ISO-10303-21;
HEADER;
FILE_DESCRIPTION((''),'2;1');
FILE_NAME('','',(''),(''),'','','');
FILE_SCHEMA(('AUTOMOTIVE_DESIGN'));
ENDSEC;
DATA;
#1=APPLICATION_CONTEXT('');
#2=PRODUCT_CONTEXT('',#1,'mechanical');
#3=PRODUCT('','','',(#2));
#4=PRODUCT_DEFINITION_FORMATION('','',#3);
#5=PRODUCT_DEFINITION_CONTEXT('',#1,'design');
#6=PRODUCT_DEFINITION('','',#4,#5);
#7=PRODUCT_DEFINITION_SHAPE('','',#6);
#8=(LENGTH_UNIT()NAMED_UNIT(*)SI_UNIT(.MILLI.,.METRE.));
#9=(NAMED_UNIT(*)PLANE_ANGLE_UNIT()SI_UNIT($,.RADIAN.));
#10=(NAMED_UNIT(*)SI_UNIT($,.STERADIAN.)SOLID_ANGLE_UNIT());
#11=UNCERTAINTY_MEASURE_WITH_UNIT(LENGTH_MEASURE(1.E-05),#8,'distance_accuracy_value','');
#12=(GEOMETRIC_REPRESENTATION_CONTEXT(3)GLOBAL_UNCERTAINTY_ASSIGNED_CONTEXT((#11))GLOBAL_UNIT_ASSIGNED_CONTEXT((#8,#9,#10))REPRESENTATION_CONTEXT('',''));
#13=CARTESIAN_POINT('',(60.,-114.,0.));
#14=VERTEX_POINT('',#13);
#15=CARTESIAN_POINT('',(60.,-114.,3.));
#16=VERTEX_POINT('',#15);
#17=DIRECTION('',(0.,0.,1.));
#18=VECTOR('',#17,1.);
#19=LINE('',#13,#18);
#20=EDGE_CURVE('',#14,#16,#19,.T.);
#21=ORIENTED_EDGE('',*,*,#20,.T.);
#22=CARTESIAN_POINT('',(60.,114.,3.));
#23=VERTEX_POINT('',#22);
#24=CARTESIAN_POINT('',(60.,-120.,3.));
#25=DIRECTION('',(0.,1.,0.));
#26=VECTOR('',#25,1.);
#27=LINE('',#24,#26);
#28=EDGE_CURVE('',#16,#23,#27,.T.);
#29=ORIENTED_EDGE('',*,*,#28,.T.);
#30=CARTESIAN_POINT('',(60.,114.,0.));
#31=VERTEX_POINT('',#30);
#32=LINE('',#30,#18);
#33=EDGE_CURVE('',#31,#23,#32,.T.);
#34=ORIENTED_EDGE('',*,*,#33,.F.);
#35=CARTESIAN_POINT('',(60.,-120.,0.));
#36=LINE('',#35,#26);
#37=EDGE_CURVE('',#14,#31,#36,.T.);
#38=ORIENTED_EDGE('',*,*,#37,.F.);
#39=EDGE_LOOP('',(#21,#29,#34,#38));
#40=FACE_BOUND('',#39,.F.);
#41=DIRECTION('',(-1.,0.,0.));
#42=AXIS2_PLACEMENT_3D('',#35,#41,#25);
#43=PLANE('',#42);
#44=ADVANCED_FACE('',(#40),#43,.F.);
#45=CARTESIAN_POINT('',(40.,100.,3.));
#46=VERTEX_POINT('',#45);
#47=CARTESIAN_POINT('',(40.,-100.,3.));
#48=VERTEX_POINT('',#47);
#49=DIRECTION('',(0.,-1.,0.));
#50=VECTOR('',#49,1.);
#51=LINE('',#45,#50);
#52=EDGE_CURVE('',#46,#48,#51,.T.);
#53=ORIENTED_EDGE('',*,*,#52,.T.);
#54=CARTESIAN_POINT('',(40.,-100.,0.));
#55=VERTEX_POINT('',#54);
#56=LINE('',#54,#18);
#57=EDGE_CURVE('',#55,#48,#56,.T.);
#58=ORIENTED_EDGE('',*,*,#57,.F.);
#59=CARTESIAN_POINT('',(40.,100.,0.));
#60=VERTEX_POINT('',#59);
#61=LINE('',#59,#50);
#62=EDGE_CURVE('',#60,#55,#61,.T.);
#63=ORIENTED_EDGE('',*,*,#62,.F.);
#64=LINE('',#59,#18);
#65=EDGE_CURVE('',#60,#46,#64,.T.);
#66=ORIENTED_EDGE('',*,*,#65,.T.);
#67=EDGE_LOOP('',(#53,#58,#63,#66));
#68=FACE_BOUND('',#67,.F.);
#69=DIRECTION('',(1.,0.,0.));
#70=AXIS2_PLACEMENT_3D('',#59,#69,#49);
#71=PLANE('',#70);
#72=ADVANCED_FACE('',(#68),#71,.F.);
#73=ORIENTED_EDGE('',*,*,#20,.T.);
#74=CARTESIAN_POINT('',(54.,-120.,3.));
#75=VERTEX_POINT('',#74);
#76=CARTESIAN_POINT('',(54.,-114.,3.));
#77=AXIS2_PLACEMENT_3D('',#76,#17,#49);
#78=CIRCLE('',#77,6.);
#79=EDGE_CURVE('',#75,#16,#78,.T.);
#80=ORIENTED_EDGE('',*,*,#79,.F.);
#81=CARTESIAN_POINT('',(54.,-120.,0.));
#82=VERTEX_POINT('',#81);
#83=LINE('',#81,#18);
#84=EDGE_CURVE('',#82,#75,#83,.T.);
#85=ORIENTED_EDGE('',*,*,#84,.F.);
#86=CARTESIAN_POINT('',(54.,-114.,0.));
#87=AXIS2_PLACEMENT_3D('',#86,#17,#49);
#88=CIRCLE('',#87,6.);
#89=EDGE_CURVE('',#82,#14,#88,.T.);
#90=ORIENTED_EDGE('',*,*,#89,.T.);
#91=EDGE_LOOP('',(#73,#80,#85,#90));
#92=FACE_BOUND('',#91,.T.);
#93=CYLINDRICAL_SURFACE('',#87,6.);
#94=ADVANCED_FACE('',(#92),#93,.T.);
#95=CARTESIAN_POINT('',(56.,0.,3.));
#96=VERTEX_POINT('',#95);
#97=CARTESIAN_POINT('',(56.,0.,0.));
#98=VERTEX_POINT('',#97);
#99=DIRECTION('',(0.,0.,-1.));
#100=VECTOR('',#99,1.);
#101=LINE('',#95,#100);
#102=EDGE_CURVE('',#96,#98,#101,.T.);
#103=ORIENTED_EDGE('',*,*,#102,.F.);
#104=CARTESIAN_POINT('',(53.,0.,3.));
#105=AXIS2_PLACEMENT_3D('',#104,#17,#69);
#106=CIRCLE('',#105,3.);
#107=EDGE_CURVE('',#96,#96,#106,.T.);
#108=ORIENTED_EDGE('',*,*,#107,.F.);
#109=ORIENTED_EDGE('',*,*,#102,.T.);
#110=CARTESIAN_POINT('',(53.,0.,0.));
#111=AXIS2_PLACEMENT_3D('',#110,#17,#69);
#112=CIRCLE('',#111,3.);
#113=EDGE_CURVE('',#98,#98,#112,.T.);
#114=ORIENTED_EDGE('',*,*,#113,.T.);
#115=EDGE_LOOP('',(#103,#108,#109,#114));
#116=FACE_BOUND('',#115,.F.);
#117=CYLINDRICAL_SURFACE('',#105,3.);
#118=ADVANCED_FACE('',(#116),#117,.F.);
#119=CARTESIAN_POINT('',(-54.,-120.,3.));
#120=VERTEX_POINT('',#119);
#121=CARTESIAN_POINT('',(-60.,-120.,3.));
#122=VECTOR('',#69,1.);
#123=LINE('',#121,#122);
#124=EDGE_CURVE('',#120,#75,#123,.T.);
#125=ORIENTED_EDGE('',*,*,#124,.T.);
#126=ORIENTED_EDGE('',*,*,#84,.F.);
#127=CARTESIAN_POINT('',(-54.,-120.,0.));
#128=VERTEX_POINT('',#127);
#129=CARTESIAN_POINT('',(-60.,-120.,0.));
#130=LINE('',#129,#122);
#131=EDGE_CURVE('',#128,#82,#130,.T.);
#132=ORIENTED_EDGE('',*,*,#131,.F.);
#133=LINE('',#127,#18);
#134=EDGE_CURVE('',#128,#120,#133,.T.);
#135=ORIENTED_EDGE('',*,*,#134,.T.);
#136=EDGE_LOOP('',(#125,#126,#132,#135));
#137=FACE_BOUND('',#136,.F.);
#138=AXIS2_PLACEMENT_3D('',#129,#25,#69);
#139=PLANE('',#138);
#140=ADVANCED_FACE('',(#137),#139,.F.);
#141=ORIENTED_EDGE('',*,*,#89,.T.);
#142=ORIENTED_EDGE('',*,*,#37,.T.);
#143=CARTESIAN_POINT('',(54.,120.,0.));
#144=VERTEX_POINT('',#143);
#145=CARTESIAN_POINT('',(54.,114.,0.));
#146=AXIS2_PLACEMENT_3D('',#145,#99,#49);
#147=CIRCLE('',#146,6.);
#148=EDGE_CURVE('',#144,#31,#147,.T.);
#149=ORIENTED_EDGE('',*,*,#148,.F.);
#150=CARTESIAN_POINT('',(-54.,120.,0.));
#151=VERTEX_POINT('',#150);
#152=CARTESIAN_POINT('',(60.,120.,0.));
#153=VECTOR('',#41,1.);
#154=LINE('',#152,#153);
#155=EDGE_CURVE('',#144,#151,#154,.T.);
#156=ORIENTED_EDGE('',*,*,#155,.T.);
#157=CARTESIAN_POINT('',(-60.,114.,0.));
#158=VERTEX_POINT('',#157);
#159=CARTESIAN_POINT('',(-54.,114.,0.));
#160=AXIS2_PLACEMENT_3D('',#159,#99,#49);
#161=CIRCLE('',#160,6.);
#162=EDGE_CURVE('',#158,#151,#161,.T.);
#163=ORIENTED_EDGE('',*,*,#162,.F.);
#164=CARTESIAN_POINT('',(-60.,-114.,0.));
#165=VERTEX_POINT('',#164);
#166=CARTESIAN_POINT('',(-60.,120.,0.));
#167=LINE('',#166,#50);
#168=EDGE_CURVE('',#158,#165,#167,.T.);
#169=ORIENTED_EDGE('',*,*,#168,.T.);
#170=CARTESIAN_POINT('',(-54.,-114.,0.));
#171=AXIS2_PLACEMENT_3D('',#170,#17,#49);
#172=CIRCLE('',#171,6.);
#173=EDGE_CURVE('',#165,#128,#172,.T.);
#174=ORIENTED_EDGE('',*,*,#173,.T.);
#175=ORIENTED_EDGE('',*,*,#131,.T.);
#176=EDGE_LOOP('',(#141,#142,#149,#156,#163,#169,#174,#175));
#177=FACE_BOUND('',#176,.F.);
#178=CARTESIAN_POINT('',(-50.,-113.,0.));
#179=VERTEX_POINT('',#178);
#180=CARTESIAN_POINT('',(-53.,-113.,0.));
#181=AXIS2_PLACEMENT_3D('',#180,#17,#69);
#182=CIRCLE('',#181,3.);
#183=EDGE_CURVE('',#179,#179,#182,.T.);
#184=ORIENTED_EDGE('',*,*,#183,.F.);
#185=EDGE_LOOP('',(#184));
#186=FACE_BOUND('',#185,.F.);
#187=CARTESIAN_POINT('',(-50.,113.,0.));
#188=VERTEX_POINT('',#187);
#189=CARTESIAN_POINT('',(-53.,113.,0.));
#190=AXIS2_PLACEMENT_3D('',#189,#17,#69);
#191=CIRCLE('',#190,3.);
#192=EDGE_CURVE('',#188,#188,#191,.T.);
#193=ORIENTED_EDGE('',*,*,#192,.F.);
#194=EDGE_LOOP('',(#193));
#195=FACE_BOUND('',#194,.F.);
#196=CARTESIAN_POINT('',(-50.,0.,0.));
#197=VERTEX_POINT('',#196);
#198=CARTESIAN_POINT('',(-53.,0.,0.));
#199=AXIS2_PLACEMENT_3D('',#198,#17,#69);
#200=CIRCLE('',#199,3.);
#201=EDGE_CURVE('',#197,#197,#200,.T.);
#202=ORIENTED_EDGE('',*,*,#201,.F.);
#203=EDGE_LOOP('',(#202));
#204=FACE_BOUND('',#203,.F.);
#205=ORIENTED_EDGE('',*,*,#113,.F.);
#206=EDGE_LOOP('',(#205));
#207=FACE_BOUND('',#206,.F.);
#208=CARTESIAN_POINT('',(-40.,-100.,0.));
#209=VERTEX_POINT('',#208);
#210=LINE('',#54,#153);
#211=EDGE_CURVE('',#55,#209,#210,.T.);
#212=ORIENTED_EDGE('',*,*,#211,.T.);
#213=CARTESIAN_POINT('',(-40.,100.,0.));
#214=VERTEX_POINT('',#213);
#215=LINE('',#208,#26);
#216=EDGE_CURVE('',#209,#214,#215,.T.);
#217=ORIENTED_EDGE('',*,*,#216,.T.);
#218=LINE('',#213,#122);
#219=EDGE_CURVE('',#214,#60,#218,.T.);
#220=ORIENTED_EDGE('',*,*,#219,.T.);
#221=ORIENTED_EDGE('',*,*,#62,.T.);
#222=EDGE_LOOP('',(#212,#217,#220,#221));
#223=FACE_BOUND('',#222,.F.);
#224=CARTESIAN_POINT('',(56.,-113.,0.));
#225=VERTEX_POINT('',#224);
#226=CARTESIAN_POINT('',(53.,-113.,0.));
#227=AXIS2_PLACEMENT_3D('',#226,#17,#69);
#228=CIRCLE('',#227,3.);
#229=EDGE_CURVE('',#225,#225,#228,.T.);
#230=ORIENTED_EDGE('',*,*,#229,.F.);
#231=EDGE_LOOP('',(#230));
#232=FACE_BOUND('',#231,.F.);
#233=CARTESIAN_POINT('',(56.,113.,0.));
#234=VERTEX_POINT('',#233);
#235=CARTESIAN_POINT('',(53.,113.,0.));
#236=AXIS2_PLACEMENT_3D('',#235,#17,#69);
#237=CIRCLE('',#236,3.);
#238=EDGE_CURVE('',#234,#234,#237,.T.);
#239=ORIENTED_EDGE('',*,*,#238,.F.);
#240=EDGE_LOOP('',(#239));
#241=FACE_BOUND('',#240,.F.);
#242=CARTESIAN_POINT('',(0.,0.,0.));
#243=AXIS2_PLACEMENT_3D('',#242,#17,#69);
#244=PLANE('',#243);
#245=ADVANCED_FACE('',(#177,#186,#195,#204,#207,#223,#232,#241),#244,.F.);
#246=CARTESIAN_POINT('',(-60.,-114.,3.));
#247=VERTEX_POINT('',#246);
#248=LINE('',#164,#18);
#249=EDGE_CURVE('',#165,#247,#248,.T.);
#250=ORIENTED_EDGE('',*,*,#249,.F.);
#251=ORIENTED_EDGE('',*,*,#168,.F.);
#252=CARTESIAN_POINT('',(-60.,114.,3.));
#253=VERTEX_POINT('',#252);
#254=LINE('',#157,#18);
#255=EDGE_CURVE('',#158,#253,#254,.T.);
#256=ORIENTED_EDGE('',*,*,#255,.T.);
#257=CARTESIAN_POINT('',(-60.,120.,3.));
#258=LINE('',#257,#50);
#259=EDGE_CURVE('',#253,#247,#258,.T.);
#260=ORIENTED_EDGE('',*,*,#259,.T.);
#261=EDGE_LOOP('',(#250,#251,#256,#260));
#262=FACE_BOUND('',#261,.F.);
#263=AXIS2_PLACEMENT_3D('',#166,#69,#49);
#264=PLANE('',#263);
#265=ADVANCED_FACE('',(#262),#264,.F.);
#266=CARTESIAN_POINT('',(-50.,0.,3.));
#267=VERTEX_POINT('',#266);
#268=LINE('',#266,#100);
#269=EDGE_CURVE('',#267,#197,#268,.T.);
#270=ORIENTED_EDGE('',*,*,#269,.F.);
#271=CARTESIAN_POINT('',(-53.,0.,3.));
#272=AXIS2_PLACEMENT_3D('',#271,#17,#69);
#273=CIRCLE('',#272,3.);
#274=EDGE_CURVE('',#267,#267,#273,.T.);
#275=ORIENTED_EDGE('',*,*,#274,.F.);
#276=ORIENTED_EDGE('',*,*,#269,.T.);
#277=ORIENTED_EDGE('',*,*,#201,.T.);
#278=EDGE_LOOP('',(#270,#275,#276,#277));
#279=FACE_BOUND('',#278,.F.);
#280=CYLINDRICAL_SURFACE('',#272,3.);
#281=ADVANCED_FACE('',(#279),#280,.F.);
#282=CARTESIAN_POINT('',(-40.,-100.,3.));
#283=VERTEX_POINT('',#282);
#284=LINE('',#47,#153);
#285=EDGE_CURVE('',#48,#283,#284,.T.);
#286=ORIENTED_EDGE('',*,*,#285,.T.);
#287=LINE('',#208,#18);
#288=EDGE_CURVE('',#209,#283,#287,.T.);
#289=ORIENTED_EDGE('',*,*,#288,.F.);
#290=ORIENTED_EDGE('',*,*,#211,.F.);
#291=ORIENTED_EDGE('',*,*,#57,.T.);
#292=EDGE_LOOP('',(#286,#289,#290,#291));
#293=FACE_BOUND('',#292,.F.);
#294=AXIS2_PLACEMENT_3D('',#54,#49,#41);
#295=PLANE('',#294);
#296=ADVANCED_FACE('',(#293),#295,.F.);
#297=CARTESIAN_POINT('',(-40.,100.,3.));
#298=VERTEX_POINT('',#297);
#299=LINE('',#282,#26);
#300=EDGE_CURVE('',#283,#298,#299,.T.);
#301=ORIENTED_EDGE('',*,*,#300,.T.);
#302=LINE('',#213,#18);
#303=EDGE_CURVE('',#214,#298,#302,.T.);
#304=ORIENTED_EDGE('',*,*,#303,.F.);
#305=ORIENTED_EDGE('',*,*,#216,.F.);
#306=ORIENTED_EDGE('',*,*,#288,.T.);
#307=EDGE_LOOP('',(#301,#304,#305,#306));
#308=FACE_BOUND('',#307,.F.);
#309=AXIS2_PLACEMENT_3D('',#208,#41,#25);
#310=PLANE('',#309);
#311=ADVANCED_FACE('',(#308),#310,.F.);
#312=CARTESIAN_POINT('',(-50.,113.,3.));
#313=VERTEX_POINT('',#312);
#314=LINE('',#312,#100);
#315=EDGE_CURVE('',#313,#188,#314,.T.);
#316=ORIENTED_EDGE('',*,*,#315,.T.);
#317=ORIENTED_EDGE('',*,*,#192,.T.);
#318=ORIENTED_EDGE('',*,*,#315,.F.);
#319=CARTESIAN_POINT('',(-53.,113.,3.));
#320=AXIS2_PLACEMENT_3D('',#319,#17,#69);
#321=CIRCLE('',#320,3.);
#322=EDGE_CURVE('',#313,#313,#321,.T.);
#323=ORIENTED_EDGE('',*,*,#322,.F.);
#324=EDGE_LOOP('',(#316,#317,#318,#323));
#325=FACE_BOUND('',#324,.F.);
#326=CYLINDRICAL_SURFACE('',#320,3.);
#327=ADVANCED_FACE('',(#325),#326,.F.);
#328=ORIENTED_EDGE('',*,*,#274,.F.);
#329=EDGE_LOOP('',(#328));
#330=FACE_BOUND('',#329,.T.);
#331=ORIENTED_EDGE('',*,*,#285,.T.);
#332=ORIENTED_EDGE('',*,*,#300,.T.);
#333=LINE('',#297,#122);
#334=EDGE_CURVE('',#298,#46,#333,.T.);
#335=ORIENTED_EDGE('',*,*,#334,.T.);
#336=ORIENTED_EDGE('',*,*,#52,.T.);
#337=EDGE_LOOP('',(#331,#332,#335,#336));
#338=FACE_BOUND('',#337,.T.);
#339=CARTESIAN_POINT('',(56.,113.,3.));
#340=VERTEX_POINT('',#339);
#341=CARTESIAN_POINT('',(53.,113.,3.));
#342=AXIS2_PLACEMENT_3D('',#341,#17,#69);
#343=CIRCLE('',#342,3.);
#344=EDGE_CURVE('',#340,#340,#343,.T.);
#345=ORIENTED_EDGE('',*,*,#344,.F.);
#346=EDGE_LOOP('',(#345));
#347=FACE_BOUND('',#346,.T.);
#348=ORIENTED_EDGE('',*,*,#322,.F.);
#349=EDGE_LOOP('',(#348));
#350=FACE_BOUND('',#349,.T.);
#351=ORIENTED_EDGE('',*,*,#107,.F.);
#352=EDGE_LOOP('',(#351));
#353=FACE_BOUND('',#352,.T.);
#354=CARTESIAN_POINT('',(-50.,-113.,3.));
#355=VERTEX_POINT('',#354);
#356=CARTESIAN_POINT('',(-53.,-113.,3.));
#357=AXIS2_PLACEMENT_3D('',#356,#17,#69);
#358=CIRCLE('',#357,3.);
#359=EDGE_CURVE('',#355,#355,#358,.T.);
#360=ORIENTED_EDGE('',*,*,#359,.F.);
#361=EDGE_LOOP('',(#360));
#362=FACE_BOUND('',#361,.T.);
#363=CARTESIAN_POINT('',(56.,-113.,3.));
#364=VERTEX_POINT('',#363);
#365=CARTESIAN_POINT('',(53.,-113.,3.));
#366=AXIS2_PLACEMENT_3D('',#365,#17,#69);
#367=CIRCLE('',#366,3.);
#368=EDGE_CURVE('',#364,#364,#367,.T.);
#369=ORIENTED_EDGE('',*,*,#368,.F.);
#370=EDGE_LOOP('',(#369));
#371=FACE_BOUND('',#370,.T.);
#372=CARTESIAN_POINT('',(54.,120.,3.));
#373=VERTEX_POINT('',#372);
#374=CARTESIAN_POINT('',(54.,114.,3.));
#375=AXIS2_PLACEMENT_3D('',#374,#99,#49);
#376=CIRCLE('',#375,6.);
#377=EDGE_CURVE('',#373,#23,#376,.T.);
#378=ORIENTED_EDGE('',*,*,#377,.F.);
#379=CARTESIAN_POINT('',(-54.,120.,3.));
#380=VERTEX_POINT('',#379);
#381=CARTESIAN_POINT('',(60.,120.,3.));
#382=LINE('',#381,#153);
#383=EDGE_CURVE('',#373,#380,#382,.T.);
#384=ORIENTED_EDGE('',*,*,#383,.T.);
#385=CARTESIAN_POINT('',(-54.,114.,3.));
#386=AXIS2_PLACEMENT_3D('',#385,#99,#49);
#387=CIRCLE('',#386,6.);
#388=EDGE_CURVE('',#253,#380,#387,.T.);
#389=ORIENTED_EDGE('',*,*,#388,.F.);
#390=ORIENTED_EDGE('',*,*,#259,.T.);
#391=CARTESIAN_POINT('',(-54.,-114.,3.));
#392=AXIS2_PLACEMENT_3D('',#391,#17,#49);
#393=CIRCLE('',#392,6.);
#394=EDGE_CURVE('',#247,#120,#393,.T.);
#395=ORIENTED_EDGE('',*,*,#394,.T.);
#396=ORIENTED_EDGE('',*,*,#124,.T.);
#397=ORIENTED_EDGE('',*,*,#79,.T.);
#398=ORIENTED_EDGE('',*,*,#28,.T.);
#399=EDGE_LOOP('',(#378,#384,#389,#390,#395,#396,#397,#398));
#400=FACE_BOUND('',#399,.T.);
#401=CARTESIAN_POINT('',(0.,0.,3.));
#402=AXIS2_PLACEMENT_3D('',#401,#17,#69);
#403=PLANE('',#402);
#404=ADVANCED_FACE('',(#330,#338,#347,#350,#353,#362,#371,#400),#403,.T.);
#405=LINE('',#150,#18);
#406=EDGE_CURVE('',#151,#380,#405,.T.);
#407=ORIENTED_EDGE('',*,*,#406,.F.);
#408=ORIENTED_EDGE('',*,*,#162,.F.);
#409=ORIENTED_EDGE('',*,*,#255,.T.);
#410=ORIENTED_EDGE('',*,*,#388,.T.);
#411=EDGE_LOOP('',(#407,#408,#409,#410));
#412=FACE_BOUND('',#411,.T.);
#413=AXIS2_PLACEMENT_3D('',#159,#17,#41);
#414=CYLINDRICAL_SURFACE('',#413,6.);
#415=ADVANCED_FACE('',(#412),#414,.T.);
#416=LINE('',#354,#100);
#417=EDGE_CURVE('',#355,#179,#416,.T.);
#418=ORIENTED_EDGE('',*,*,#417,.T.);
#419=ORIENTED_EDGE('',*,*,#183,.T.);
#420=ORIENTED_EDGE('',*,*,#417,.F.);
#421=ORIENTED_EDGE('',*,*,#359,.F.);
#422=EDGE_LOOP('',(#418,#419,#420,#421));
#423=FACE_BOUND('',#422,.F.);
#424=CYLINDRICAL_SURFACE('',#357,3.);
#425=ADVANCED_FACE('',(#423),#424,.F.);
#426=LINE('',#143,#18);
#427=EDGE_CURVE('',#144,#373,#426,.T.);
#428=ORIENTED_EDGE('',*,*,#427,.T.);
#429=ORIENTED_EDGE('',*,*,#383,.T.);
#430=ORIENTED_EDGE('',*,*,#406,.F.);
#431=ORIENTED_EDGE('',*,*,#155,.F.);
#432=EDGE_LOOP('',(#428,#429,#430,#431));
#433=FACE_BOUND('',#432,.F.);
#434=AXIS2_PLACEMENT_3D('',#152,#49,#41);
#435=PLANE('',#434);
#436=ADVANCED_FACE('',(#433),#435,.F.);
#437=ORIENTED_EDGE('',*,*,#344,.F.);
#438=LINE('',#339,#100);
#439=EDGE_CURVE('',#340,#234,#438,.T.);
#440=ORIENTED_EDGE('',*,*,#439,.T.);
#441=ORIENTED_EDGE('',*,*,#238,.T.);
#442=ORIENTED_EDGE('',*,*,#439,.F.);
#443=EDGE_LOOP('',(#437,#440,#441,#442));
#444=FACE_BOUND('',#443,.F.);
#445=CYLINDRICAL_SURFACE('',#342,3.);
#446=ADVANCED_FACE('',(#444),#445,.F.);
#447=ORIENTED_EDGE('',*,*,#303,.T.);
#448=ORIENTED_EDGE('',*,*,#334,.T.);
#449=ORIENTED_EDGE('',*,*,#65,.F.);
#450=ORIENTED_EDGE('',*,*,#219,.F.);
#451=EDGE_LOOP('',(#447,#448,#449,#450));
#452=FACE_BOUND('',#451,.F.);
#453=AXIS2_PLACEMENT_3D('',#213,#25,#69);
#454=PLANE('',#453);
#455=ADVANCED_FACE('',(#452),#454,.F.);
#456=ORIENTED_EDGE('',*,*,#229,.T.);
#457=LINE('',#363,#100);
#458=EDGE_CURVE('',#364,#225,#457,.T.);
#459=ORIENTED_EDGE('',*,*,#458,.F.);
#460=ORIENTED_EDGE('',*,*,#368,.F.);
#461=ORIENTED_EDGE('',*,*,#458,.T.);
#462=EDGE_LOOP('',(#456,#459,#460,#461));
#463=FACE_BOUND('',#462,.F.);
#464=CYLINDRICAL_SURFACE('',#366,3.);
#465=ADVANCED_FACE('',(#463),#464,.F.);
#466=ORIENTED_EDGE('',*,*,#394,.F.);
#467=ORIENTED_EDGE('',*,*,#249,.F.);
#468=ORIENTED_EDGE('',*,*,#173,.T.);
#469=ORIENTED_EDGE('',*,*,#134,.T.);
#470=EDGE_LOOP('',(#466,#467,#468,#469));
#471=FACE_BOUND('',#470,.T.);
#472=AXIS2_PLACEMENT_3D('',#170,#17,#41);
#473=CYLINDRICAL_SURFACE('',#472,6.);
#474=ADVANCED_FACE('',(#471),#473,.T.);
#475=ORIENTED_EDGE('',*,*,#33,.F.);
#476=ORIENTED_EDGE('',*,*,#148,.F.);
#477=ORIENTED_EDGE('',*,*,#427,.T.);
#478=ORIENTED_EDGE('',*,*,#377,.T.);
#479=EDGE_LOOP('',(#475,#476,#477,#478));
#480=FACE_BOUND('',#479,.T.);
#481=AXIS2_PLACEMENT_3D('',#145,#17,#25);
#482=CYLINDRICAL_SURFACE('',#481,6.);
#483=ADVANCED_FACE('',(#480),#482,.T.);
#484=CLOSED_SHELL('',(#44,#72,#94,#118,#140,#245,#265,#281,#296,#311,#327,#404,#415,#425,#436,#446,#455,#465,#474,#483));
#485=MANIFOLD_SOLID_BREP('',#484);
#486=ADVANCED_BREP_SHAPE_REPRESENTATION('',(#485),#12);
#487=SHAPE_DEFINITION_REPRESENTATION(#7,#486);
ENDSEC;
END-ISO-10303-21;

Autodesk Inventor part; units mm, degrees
ref_plane "YZ Plane" through (0, 0, 0) normal (1, 0, 0) x (0, 1, 0)
ref_plane "XZ Plane" through (0, 0, 0) normal (0, 1, 0) x (-1, 0, 0)
ref_plane "XY Plane" through (0, 0, 0) normal (0, 0, 1) x (1, 0, 0)
sketch "Sketch1" plane through (0, 0, 0) normal (0, 0, 1) x (1, 0, 0)
  line L0 (-60, -120) -> (60, -120)
  line L1 (60, -120) -> (60, 120)
  line L2 (60, 120) -> (-60, 120)
  line L3 (-60, 120) -> (-60, -120)
  line L4 (-60, -120) -> (60, 120) construction
  line L5 (60, -120) -> (-60, 120) construction
  line L6 (40, -100) -> (-40, -100)
  line L7 (-40, -100) -> (-40, 100)
  line L8 (-40, 100) -> (40, 100)
  line L9 (40, 100) -> (40, -100)
  line L10 (40, -100) -> (-40, 100) construction
  line L11 (-40, -100) -> (40, 100) construction
  point P0 (0, 0)
  dimension "d172" = 80
  dimension "d180" = 20
  dimension "d181" = 20
  dimension "d182" = 200
extrude "Plate5" add sketch "Sketch1" along normal blind 3
sketch "Sketch9" plane through (0, 0, 3) normal (0, 0, 1) x (1, 0, 0)
  circle A0 centre (53, -113) radius 3
  line L0 (53, 113) -> (-53, 113) construction
  line L1 (-53, 113) -> (-53, -113) construction
  line L2 (-53, -113) -> (53, -113) construction
  line L3 (53, -113) -> (53, 113) construction
  line L4 (53, 113) -> (-53, -113) construction
  line L5 (-53, 113) -> (53, -113) construction
  circle A1 centre (-53, -113) radius 3
  circle A2 centre (53, 113) radius 3
  circle A3 centre (-53, 113) radius 3
  line L6 (-40, -100) -> (-40, 100) projected
  line L7 (-40, 100) -> (40, 100) projected
  line L8 (40, 100) -> (40, -100) projected
  line L9 (40, -100) -> (-40, -100) projected
  line L10 (60, -120) -> (-60, -120) projected
  line L11 (60, 120) -> (60, -120) projected
  line L12 (-60, 120) -> (60, 120) projected
  line L13 (-60, -120) -> (-60, 120) projected
  circle A4 centre (-53, 0) radius 3
  circle A5 centre (53, 0) radius 3
  point P0 (0, 0)
  dimension "d174" = 6
  dimension "d183" = 7
  dimension "d184" = 7
extrude "Cut2" cut sketch "Sketch9" against normal blind 3 contours A0 | A1 | A2 | A3 | A4 | A5
fillet "Corner Round1" radius 6 4 edges at (60, 120, 1.5) (-60, 120, 1.5) (-60, -120, 1.5) (60, -120, 1.5)
properties part number "TKS 3521 BOTTOM FDS Diam way flange 1" material "Stainless Steel"
